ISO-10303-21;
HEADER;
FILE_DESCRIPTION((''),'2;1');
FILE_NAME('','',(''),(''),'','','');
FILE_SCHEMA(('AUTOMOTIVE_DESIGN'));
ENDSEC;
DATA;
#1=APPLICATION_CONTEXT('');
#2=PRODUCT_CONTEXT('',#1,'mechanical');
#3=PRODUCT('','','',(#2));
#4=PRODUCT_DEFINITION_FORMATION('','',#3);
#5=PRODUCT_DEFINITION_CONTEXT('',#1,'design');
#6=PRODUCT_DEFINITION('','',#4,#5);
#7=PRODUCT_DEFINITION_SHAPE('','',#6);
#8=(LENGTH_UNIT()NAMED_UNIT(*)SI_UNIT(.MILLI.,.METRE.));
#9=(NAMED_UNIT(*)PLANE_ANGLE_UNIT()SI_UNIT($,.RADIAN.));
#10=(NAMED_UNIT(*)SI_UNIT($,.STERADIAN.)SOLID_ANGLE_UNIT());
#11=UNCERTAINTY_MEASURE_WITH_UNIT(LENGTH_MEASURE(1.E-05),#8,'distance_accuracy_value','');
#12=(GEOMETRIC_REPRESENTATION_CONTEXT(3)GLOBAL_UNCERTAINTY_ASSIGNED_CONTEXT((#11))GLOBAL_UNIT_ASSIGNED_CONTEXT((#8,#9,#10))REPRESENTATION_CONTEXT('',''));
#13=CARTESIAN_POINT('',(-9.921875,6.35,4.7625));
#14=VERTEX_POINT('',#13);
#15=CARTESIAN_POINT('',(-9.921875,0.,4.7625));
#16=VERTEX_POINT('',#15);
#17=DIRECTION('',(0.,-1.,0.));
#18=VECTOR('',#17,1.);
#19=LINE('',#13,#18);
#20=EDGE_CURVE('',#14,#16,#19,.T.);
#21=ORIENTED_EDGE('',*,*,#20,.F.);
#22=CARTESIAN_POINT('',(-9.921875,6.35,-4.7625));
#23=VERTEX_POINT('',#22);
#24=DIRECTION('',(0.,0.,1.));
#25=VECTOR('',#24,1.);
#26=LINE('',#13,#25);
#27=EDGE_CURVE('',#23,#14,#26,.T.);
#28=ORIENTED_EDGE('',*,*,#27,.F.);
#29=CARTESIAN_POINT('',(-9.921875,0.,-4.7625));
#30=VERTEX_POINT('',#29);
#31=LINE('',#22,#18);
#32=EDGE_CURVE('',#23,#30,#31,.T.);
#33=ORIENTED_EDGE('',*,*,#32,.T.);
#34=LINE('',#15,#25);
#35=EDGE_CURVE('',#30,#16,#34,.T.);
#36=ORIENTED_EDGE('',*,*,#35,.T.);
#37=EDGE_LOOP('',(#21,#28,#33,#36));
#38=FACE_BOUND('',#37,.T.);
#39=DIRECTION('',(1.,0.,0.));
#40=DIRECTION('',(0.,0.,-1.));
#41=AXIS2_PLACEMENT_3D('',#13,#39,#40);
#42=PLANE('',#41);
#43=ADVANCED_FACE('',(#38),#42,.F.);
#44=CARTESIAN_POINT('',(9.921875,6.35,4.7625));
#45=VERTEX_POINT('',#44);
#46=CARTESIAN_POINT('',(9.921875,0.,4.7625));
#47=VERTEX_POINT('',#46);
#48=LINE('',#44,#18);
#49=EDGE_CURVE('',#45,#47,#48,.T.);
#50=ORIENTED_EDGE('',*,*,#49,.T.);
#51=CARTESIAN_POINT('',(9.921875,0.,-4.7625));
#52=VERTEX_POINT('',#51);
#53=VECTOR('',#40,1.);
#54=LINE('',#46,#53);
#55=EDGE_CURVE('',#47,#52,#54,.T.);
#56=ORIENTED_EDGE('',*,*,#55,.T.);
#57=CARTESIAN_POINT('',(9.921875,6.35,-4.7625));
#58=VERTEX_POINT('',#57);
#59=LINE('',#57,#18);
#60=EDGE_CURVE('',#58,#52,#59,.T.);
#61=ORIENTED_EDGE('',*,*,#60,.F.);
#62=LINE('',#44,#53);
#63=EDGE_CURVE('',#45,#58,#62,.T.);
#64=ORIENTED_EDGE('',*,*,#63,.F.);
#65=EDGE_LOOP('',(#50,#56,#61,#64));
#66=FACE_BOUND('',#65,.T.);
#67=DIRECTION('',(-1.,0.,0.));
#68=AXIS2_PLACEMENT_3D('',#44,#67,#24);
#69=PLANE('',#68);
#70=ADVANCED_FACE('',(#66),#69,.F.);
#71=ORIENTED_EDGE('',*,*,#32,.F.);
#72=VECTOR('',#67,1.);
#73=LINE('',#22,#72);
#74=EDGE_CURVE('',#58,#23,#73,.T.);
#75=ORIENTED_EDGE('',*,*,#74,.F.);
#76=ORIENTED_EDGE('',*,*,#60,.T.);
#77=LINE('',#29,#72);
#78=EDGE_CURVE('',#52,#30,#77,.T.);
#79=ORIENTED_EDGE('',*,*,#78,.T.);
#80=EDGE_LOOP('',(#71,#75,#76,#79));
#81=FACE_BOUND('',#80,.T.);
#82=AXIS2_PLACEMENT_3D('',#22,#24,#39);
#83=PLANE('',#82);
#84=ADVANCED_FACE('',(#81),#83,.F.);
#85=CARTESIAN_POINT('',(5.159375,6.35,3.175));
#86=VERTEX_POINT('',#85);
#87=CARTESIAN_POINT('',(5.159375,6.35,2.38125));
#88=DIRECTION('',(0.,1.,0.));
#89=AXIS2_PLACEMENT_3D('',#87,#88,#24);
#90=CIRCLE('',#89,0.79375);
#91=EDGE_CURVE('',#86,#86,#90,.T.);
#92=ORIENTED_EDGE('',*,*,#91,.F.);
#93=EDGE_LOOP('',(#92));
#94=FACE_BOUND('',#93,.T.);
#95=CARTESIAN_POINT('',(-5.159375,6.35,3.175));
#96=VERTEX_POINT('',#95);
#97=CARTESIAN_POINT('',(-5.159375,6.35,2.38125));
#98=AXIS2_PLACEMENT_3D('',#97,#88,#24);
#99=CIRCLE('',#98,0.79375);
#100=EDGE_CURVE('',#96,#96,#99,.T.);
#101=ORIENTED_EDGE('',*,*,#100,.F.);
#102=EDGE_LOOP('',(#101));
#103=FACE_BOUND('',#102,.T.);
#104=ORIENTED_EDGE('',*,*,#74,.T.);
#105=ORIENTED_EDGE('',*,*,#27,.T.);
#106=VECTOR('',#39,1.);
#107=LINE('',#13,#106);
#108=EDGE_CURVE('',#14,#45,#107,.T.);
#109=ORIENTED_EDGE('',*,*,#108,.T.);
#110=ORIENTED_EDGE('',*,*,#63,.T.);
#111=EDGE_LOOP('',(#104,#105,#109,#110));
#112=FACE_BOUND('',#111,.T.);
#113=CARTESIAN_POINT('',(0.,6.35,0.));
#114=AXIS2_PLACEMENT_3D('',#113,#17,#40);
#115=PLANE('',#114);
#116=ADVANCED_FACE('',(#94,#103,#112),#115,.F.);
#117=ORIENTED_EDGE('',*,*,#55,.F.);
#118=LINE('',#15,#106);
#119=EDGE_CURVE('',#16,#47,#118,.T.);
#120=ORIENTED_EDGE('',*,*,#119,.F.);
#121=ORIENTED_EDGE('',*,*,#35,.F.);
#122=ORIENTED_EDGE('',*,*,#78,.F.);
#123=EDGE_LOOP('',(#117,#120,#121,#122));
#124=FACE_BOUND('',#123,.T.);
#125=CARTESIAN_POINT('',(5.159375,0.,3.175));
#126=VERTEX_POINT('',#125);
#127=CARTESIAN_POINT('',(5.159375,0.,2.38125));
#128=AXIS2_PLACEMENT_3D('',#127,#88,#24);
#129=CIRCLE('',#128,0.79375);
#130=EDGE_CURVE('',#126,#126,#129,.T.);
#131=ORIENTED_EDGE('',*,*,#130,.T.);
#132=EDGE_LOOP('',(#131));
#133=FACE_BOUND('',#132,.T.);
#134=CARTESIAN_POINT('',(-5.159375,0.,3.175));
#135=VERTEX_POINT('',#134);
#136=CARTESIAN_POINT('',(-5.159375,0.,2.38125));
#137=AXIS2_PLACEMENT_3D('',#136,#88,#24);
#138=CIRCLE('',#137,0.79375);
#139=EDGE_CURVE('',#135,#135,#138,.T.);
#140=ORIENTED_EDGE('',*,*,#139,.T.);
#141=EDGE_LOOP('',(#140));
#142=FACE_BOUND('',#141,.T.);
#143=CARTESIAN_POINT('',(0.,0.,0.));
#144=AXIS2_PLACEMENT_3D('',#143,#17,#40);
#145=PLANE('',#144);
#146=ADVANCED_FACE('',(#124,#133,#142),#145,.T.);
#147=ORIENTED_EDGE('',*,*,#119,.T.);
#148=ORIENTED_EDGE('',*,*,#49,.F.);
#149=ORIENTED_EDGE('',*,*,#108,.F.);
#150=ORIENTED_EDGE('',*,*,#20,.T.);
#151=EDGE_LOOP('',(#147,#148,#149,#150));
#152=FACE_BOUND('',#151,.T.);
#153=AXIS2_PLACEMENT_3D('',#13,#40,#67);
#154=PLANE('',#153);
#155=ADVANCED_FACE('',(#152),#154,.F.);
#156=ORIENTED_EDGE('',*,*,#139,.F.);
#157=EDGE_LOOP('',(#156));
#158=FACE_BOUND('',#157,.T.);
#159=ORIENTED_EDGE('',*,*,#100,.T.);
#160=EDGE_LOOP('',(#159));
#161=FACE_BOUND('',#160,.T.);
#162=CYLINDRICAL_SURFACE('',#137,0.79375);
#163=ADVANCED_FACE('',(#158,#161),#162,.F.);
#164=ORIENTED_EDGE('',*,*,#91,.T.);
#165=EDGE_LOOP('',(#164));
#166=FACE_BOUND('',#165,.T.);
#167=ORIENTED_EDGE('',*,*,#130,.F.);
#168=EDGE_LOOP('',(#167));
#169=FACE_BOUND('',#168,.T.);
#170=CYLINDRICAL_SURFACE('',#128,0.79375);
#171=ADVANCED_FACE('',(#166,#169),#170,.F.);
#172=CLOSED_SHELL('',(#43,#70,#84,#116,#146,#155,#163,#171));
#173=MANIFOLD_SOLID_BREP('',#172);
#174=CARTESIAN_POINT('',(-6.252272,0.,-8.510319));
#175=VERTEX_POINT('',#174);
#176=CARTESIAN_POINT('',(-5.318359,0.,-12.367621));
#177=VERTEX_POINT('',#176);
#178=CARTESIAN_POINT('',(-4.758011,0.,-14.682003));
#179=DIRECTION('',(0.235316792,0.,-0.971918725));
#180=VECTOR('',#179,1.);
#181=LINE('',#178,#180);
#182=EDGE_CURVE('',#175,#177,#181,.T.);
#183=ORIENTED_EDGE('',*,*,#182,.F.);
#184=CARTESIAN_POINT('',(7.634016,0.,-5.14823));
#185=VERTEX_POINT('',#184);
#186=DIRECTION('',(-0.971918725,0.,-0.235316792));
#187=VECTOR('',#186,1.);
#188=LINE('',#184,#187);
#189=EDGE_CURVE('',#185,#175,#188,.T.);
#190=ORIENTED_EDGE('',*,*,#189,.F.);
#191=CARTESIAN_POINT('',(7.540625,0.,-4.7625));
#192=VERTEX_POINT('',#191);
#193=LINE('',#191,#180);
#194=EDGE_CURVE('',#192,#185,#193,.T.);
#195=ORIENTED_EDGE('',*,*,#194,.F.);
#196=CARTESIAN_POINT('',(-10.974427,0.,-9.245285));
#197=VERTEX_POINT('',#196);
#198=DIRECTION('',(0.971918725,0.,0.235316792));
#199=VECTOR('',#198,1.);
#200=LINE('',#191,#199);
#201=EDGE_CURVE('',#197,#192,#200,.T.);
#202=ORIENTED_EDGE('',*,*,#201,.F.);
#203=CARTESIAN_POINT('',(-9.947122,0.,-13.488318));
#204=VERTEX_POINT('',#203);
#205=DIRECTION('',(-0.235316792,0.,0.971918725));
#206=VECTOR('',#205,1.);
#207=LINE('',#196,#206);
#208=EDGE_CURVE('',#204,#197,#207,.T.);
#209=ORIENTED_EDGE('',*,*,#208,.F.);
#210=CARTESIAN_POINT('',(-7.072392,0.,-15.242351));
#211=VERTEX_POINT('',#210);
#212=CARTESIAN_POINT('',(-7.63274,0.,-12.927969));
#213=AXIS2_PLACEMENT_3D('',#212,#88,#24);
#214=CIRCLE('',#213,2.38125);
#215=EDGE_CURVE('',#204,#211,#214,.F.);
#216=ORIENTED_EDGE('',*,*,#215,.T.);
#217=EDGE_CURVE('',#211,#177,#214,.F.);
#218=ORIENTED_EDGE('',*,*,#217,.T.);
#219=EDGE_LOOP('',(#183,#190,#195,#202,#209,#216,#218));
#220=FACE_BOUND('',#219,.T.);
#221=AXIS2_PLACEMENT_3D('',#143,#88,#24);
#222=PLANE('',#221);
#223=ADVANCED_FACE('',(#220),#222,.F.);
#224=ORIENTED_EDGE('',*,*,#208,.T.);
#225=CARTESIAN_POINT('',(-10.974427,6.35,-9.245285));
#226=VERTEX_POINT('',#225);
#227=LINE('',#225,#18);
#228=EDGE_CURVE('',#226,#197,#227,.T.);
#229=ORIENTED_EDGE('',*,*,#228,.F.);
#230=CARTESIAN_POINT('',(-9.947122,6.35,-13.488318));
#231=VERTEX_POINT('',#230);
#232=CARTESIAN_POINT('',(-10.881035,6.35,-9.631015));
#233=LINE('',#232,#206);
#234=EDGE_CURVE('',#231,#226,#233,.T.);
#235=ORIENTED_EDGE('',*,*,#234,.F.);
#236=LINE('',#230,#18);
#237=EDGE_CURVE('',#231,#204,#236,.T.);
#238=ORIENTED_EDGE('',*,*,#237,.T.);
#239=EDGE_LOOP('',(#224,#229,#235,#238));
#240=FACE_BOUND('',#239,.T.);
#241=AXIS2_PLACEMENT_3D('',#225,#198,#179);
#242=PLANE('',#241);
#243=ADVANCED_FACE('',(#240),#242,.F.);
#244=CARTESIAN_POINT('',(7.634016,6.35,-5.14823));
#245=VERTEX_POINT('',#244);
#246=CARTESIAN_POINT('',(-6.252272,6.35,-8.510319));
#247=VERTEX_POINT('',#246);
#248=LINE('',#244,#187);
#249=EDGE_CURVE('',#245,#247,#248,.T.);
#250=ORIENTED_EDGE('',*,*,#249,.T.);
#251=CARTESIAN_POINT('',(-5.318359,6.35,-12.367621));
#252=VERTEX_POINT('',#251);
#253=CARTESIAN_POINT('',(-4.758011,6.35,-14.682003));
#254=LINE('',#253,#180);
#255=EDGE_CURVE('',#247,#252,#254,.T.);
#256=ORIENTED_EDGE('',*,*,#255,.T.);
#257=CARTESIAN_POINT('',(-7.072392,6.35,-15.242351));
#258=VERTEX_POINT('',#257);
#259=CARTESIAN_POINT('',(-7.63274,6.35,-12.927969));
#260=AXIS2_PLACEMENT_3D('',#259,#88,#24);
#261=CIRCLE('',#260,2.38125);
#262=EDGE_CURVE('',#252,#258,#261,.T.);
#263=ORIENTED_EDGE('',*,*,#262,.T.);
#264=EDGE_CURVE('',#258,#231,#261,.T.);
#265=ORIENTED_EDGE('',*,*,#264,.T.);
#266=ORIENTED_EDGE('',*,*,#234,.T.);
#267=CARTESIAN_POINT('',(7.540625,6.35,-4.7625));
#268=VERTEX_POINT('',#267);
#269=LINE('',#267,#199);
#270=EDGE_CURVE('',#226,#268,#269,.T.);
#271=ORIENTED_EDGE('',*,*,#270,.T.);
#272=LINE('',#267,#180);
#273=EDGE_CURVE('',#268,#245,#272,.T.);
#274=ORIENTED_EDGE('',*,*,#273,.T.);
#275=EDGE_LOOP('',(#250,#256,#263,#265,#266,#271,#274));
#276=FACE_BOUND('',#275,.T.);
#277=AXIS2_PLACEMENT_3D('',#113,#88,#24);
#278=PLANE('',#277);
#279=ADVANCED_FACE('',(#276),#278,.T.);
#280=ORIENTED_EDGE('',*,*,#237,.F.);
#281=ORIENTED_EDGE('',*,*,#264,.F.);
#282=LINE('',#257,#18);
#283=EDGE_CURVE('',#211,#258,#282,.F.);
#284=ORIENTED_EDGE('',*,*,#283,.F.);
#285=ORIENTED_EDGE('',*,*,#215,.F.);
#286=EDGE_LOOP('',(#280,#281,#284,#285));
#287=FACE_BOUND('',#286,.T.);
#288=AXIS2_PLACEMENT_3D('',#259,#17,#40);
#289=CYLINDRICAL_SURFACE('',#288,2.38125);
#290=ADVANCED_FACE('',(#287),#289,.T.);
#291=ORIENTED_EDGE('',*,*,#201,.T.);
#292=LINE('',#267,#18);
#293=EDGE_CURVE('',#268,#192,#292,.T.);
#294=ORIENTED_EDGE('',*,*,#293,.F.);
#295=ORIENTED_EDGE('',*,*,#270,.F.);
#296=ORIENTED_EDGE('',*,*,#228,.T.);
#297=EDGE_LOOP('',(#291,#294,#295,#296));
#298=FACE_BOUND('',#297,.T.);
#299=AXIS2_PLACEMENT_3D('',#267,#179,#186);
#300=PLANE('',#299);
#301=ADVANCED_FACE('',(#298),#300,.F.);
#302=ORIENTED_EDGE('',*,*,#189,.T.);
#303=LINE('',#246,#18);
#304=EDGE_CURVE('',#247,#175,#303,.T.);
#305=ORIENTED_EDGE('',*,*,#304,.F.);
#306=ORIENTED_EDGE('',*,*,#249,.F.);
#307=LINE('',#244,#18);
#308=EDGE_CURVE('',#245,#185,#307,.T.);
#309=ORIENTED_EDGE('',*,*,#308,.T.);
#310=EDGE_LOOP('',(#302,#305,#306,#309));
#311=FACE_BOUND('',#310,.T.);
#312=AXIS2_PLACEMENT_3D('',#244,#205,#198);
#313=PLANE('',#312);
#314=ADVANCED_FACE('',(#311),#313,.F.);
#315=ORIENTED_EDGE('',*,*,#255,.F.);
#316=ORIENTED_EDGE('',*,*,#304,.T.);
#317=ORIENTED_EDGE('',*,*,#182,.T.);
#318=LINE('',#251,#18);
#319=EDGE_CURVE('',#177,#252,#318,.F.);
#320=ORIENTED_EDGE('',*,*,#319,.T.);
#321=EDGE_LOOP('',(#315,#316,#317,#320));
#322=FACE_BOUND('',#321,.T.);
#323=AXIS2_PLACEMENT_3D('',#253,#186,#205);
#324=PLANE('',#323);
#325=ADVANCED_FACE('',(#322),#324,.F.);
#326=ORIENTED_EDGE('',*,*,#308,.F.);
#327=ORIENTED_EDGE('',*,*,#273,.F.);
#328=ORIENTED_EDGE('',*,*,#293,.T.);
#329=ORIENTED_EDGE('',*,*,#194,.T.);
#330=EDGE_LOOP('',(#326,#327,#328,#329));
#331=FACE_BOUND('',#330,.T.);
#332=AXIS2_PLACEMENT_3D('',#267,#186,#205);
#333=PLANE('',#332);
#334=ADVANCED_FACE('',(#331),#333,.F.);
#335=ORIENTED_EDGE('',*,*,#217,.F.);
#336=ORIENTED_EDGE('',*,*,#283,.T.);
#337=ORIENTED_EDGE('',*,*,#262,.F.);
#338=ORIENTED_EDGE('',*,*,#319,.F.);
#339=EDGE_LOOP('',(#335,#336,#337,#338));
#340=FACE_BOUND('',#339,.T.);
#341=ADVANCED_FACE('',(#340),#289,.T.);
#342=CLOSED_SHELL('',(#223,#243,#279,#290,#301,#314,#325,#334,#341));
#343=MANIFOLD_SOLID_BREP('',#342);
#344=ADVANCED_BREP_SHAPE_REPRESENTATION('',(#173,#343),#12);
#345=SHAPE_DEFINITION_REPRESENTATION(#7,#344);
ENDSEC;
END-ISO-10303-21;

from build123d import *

# Parameters (mm, degrees)
SKETCH1_W           = 19.84375
SKETCH1_H           = 9.525
BOSS_EXTRUDE1_DEPTH = 6.35
SKETCH2_R           = 0.79375
CUT_EXTRUDE1_DEPTH  = 13.706199659
BOSS_EXTRUDE2_DEPTH = 6.35
FILLET1_R           = 2.38125


with BuildPart() as part:
    # Sketch1 → Boss-Extrude1 (new body)
    with BuildSketch(Plane(origin=(0, 0, 0), x_dir=(1, 0, 0), z_dir=(0, 1, 0))):
        Rectangle(SKETCH1_W, SKETCH1_H)
    extrude(amount=BOSS_EXTRUDE1_DEPTH)

    # Sketch2 → Cut-Extrude1 (cut, through all)
    with BuildSketch(Plane(origin=(0, 6.35, 0), x_dir=(1, 0, 0), z_dir=(0, 1, 0))):
        with Locations(Location((-5.159375, -2.38125, 0), (0, 0, 270))):
            Circle(SKETCH2_R)
        with Locations(Location((5.159375, -2.38125, 0), (0, 0, 270))):
            Circle(SKETCH2_R)
    extrude(amount=-CUT_EXTRUDE1_DEPTH, mode=Mode.SUBTRACT)


with BuildPart() as body_2:
    # Sketch3 → Boss-Extrude2 (new body)
    with BuildSketch(Plane(origin=(0, 0, 0), x_dir=(1, 0, 0), z_dir=(0, 1, 0))):
        Polygon((7.540625, 4.7625), (-10.974426706, 9.245284885), (-10.881035354, 9.631015129), (-9.386773726, 15.802699031), (-4.758010799, 14.68200281), (-6.252272428, 8.510318908), (7.634016352, 5.148230244), align=None)
    extrude(amount=BOSS_EXTRUDE2_DEPTH)

    # Fillet1
    fillet1_edges = [body_2.edges().sort_by_distance(p)[0] for p in [
        (-4.758010799, 3.175, -14.68200281),
        (-9.386773726, 3.175, -15.802699031),
    ]]
    fillet(fillet1_edges, radius=FILLET1_R - 0.0001)  # a hair under: the kernel refuses the full size


solid = Compound([part.part, body_2.part])
